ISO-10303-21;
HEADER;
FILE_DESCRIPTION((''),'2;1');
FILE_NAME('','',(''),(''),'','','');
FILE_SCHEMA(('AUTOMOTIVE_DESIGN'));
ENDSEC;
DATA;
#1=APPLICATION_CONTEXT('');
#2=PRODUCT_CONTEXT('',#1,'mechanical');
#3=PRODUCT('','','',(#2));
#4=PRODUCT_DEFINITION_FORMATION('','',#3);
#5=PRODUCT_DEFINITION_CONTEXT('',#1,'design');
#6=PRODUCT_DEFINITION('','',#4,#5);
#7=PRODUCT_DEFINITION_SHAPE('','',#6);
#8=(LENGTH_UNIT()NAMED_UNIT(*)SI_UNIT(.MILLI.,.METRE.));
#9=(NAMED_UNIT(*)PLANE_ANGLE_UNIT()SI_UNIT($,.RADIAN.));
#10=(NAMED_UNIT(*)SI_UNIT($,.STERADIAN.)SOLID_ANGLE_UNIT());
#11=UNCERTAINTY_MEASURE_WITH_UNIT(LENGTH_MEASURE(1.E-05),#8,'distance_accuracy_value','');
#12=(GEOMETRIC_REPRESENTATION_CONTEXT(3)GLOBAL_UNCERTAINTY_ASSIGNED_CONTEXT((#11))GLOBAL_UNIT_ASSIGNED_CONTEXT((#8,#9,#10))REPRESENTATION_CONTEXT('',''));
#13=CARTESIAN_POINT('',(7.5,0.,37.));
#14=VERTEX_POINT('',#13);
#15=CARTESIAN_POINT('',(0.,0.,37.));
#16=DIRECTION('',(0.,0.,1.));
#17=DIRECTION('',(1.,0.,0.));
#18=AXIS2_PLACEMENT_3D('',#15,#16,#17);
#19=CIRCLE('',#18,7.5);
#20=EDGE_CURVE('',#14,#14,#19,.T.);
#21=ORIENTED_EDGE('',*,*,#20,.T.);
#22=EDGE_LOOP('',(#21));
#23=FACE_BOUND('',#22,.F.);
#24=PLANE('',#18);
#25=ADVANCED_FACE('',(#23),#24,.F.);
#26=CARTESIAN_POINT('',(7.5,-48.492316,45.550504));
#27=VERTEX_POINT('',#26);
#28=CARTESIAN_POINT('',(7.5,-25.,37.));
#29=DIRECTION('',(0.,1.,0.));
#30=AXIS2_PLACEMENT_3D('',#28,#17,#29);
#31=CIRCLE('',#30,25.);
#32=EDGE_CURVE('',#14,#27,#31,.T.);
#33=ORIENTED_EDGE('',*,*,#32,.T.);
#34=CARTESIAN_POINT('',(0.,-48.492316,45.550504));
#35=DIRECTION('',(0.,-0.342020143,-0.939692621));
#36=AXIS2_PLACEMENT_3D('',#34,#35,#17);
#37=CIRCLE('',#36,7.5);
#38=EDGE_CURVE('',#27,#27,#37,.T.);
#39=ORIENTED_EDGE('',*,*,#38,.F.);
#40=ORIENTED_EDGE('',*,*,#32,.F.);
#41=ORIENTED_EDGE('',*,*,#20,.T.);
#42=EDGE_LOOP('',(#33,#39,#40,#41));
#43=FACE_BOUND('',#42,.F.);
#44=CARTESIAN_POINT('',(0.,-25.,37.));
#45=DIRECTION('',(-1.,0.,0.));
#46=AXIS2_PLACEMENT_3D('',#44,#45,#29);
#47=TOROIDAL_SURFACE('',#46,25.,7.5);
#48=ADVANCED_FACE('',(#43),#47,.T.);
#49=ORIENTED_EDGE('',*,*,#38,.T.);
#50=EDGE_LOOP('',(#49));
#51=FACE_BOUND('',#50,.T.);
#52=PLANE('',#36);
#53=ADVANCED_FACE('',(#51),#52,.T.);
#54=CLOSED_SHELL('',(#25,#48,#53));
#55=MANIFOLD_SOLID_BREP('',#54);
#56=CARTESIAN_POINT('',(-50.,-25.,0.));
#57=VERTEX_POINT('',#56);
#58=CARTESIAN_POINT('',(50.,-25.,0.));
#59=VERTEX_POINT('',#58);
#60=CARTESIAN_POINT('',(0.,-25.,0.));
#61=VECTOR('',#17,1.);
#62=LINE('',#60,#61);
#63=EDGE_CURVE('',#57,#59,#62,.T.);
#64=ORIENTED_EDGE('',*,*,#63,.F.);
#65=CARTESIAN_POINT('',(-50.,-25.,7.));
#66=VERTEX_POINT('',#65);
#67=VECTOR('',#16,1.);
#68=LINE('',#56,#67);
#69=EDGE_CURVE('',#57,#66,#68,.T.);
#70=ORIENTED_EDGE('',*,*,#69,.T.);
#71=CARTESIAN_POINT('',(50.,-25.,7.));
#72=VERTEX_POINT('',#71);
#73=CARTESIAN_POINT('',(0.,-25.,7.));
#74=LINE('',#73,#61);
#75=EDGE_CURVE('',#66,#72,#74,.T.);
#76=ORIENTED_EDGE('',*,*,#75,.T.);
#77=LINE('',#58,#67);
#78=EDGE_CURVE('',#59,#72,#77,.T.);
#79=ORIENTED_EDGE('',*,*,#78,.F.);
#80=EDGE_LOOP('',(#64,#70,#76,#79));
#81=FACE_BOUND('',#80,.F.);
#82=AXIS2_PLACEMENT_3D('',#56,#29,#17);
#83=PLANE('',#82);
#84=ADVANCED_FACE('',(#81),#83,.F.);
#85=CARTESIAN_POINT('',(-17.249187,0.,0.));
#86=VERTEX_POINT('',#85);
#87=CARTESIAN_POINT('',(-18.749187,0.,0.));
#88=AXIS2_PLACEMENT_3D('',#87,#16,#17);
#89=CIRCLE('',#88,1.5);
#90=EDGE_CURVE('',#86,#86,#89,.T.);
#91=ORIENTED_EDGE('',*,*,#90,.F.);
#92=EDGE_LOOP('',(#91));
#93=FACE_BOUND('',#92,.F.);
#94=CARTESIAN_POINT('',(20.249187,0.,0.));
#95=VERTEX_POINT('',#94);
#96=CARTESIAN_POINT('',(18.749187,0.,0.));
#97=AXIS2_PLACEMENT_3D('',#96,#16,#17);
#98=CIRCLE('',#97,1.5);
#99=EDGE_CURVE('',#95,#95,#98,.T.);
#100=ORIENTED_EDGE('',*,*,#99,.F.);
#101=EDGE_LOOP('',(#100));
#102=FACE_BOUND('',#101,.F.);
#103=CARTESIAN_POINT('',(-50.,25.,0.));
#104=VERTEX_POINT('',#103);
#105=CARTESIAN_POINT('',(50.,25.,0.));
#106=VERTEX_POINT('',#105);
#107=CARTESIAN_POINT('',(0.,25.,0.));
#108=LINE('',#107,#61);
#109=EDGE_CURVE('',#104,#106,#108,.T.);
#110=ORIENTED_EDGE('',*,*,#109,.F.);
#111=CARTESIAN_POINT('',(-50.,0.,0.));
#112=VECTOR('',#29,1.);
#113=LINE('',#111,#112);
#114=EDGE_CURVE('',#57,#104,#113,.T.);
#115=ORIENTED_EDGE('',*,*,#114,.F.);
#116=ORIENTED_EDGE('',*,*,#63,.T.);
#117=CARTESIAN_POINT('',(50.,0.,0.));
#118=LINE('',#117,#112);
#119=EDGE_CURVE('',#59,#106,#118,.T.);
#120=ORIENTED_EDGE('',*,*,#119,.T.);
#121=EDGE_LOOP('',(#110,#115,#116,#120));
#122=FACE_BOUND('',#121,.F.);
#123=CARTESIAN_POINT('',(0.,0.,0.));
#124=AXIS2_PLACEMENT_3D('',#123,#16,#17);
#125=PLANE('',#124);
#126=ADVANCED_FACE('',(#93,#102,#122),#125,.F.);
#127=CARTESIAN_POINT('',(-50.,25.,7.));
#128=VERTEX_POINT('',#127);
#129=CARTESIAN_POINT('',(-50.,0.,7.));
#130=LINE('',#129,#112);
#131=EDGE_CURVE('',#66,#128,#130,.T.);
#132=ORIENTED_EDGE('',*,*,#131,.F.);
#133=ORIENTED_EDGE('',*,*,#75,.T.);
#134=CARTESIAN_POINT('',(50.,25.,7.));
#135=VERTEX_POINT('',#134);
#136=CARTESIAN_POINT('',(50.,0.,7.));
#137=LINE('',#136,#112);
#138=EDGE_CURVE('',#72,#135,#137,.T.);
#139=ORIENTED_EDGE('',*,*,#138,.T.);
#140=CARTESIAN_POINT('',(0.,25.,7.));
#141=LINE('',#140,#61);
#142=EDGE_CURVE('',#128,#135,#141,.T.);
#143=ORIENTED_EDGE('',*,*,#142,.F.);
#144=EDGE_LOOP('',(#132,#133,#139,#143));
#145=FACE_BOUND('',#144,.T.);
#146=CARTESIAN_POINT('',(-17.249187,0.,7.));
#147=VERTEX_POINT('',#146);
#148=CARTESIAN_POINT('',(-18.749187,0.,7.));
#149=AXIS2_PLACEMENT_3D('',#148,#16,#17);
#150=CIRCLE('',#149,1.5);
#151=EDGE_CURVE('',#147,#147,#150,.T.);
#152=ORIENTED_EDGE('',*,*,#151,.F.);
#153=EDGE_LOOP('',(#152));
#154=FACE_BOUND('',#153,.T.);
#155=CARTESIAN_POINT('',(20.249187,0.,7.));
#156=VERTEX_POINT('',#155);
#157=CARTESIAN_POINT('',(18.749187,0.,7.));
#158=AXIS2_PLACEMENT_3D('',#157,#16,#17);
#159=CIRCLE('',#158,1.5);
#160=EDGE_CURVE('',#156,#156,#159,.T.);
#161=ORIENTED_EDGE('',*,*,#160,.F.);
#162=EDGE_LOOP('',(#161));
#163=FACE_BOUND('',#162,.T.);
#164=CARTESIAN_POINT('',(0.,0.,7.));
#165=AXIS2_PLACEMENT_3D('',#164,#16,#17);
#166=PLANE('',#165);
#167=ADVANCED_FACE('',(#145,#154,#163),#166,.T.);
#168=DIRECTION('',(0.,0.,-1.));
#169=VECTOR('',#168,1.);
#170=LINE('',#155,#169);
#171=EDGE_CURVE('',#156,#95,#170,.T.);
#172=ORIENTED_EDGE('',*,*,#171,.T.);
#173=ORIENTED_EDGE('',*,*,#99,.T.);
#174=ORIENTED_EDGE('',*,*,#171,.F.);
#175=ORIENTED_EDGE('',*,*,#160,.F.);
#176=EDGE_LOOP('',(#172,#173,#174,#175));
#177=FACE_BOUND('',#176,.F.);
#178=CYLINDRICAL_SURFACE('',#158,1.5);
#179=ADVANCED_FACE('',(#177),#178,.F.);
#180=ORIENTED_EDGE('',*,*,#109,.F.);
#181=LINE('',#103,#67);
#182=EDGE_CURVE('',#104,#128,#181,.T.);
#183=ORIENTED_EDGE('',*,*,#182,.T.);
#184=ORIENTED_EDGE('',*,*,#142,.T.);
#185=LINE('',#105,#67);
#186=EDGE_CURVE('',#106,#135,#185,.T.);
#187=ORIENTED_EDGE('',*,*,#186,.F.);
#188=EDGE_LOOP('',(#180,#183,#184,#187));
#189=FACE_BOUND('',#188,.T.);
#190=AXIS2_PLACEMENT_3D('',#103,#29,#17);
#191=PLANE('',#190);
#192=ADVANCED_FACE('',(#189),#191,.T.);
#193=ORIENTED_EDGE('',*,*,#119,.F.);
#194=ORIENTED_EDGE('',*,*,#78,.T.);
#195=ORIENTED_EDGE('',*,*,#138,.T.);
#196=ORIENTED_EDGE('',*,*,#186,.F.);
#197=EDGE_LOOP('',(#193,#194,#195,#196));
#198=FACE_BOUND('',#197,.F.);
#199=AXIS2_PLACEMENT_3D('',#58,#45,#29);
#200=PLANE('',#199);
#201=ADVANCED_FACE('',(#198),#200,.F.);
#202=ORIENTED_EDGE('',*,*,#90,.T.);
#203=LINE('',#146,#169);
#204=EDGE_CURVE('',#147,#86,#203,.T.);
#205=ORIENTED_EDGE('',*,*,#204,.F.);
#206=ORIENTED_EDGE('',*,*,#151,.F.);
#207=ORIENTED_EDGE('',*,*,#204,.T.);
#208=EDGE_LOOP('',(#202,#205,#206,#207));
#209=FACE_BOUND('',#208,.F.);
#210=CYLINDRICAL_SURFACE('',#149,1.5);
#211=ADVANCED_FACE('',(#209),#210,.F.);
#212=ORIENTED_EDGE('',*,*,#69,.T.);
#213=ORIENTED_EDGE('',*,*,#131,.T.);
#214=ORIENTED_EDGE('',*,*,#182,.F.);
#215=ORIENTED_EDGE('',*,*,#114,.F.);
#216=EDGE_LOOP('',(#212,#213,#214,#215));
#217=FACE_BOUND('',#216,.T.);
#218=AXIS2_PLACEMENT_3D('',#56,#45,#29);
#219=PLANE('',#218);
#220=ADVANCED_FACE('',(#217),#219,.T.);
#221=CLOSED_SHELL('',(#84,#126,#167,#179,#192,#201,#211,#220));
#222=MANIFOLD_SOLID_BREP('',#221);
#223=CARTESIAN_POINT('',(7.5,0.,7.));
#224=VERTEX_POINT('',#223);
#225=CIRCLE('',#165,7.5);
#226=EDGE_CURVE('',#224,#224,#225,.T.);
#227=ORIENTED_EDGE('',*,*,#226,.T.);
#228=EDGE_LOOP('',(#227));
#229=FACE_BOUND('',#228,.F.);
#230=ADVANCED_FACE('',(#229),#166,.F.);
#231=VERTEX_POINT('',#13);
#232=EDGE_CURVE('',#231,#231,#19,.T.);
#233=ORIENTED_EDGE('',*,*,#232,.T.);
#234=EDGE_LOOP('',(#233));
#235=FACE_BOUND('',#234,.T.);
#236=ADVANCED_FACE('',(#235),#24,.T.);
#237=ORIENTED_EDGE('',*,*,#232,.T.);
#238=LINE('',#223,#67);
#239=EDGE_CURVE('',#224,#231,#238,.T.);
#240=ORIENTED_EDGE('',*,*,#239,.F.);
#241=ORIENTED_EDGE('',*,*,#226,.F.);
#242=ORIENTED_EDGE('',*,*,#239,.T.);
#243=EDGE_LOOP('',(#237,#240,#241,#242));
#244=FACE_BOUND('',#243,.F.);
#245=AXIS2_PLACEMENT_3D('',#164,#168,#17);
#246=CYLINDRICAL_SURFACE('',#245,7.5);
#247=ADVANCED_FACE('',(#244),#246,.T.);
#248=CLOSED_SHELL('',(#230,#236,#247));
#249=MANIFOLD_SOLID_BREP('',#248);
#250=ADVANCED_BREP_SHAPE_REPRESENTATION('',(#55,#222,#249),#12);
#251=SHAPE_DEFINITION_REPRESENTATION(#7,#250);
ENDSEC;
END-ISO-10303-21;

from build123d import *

# Parameters (mm, degrees)
F0_W     = 100
F0_H     = 50
F1_DEPTH = 7
F2_R     = 1.5
F3_DEPTH = 25
F4_R     = 7.5
F5_DEPTH = 30
F4_W     = 5.0690565258
F4_H     = 5.2306629717
F6_R     = 7.5
F7_ANGLE = 160


with BuildPart() as f1:
    # F0 (on Top) → F1 (new body)
    with BuildSketch(Plane.XY):
        Rectangle(F0_W, F0_H)
    extrude(amount=F1_DEPTH)

    # F2 (on face) → F3 (cut)
    with BuildSketch(Plane.XY.offset(7)):
        with Locations((18.7491867621, 0)):
            Circle(F2_R)
        with Locations((-18.7491867621, 0)):
            Circle(F2_R)
    extrude(amount=-F3_DEPTH, mode=Mode.SUBTRACT)


with BuildPart() as f5:
    # F4 (on face) → F5 (new body)
    with BuildSketch(Plane.XY.offset(7)):
        Circle(F4_R)
    extrude(amount=F5_DEPTH)


with BuildPart() as f5b:
    # F4 (on face) → F5, piece 2 (new body)
    with BuildSketch(Plane.XY.offset(7)):
        with Locations((2.5345282629, -22.3846685141)):
            Rectangle(F4_W, F4_H)
    extrude(amount=F5_DEPTH)


with BuildPart() as f7:
    # F6 (on face) → F7 (revolve)
    with BuildSketch(Plane.XY.offset(37)):
        Circle(F6_R)
    revolve(axis=Axis((2.5345282629, -25, 37), (1, 0, 0)), revolution_arc=F7_ANGLE)


solid = Compound([f1.part, f5.part, f7.part])
